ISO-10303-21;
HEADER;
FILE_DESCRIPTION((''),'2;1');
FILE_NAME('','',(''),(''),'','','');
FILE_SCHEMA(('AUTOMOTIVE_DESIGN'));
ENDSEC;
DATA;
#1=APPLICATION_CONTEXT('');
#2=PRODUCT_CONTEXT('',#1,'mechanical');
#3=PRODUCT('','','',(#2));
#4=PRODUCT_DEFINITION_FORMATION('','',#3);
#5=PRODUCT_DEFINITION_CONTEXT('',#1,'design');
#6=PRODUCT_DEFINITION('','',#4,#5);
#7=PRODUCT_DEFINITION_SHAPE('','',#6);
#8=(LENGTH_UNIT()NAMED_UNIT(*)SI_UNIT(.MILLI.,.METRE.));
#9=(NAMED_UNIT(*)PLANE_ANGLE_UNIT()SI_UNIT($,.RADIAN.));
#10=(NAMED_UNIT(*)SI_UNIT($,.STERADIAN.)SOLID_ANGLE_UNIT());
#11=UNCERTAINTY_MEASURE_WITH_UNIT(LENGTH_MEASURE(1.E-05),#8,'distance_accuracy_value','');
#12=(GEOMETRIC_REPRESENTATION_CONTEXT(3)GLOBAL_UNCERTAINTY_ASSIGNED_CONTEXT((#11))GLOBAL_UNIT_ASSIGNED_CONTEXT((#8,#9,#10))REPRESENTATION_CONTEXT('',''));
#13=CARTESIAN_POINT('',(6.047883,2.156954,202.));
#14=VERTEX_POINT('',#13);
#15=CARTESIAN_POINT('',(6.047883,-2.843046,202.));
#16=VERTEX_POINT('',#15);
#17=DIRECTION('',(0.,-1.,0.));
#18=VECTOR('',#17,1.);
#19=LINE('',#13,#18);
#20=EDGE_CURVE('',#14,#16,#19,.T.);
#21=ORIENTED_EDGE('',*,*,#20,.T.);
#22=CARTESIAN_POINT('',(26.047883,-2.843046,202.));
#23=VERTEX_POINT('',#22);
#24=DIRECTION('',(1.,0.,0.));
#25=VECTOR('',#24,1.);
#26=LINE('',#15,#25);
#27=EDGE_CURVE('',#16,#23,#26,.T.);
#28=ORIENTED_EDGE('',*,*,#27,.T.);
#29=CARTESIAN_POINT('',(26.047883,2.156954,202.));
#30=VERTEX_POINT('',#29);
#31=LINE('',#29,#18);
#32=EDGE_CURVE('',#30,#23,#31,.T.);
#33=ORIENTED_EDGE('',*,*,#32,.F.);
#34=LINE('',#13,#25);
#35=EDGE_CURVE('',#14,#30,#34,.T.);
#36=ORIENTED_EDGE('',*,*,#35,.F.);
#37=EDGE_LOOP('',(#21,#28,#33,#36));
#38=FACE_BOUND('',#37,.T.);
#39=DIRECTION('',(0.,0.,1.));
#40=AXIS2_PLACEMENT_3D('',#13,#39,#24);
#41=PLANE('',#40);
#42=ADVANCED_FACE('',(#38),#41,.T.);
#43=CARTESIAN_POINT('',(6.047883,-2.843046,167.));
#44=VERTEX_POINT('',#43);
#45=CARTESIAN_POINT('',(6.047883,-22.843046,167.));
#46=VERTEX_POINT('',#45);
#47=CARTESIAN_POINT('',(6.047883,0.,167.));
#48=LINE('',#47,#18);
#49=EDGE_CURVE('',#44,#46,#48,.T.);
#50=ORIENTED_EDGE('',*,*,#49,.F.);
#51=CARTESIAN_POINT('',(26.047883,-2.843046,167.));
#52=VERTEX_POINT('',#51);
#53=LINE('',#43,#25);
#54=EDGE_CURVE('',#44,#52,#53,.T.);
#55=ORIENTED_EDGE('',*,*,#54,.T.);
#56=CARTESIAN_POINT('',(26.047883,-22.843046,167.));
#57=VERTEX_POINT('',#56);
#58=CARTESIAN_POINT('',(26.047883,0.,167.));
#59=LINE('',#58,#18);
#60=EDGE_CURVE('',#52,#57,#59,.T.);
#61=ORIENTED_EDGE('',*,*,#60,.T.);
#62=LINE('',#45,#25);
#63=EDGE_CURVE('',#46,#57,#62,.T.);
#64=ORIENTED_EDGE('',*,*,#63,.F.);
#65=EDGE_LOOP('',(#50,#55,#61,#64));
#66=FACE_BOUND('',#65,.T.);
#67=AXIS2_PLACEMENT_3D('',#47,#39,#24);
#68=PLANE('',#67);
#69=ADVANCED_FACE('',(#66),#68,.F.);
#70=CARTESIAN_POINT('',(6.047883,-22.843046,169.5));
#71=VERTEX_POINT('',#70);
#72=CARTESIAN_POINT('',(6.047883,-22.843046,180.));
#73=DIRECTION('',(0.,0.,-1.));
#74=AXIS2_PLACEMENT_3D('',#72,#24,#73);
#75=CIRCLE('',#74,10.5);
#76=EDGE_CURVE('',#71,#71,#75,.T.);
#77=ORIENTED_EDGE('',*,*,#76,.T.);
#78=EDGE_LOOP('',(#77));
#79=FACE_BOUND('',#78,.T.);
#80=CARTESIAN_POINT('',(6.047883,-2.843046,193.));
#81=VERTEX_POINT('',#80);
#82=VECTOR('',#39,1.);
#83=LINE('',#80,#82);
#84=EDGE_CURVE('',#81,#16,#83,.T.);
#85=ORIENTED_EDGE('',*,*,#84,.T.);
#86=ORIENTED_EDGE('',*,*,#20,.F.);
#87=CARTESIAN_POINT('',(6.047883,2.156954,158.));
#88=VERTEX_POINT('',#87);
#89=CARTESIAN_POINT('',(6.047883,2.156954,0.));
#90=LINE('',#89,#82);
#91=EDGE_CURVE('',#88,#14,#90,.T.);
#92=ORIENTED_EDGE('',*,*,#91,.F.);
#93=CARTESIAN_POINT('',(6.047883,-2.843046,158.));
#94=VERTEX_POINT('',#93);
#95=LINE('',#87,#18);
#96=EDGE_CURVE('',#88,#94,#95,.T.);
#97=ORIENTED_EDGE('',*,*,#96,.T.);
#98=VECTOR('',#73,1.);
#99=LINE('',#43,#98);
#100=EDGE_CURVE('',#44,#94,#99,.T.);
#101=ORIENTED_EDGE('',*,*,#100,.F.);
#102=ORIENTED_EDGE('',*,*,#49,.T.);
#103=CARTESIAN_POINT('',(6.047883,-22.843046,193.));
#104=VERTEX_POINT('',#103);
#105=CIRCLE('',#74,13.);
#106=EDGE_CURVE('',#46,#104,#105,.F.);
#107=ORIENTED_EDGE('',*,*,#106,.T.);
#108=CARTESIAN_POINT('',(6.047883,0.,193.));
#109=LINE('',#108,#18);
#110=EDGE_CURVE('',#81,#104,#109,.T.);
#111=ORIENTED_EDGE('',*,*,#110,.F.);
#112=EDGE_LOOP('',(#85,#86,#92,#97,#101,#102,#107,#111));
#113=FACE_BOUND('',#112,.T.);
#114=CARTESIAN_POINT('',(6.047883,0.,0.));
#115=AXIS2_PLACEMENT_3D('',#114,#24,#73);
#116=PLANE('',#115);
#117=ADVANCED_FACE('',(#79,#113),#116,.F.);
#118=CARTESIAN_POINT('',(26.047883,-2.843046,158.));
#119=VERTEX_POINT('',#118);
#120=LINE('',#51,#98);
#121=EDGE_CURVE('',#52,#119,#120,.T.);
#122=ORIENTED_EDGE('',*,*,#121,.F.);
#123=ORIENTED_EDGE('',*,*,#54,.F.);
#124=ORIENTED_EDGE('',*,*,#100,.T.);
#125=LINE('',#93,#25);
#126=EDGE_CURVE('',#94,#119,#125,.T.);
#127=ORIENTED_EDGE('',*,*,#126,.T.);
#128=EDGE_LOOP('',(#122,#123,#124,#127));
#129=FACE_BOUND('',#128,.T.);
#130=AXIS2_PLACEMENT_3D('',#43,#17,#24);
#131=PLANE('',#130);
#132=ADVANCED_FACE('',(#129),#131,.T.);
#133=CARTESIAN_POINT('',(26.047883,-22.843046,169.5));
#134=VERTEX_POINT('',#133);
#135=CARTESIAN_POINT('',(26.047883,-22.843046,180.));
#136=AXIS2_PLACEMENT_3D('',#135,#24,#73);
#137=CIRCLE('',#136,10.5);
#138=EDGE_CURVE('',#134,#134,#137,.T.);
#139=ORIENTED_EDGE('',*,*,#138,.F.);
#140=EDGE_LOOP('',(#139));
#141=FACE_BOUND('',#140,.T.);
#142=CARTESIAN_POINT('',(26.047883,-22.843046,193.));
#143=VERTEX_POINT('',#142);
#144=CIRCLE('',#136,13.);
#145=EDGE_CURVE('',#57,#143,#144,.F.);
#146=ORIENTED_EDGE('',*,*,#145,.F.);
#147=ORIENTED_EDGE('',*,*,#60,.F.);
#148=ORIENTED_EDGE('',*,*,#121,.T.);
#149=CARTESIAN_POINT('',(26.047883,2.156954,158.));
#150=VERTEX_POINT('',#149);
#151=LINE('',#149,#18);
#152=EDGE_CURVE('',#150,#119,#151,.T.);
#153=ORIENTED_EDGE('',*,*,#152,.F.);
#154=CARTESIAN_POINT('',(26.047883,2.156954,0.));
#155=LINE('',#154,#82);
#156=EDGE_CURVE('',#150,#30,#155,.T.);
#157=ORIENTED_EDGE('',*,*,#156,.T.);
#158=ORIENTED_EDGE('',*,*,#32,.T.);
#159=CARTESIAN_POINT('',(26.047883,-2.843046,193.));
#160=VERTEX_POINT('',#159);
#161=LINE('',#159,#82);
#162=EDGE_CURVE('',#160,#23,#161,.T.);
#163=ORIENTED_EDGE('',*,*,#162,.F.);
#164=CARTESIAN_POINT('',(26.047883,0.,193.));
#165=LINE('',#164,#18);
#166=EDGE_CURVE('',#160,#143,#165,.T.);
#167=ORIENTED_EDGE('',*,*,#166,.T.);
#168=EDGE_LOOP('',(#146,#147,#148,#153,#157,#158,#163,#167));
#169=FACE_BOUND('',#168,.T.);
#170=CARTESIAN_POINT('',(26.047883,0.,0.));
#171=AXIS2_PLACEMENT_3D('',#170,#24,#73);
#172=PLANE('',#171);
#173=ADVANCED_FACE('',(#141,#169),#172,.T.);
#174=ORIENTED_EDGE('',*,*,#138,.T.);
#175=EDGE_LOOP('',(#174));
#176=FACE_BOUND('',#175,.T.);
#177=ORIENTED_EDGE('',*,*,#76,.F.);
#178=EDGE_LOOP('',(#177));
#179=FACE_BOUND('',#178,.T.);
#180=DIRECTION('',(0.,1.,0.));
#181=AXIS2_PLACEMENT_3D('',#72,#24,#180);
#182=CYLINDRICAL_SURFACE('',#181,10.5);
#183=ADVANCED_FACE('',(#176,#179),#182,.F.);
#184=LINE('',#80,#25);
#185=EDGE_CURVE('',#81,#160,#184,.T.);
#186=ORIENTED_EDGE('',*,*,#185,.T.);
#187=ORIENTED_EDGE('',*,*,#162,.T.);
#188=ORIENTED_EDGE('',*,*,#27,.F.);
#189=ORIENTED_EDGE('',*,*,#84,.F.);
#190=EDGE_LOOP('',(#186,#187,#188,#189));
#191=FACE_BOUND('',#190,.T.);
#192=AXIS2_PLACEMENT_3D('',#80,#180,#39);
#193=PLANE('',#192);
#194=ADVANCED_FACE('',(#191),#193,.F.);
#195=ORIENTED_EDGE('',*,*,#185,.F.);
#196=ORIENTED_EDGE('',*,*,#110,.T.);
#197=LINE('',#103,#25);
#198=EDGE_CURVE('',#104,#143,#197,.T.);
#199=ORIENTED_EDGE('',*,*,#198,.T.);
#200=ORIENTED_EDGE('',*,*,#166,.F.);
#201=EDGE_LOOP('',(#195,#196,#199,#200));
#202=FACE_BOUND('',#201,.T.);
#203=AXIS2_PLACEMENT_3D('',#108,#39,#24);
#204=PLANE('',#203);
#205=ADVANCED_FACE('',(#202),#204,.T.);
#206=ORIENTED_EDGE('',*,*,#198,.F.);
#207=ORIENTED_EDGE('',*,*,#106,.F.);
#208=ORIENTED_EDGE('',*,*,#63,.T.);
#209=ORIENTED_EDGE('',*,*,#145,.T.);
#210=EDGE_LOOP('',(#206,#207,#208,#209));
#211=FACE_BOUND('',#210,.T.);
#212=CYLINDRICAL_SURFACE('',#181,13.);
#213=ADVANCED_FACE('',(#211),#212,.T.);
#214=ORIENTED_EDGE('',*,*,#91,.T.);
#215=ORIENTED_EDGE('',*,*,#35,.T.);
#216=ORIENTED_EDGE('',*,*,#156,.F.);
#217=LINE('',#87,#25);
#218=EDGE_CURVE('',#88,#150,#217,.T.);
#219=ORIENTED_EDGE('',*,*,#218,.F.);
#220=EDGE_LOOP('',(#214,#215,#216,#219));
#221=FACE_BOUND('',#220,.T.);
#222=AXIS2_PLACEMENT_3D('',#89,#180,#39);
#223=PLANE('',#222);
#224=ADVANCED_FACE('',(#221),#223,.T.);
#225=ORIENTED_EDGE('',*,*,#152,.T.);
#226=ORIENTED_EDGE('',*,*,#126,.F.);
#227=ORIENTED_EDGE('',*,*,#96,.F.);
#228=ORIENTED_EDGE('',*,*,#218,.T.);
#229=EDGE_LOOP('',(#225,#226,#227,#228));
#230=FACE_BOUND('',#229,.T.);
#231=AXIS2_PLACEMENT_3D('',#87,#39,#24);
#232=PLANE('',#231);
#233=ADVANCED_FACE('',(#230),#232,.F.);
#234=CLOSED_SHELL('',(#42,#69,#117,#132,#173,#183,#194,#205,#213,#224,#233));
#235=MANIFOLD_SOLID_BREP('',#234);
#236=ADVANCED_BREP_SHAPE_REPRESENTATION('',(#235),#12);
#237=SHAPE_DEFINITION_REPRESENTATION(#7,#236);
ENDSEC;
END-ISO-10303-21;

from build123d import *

# Parameters (mm, degrees)
EXTRUDE_START       = -20
EXTRUDE_1_OUTLINE_R = 10.5
EXTRUDE_1_DEPTH     = 20


# Read off the part's stored shape, not the designer's step: 填料-伸長1
with BuildPart() as part:
    # 填料-伸長1 outline → 填料-伸長1 (new body)
    with BuildSketch(Plane(origin=(26.04788271, 0, 0), x_dir=(0, 0, -1), z_dir=(1, 0, 0)).offset(EXTRUDE_START)):
        with BuildLine():
            Line((-201.999999965, -2.843045968), (-192.999999965, -2.843045968))
            Line((-192.999999965, -2.843045968), (-192.999999965, -22.843045968))
            ThreePointArc((-192.999999965, -22.843045968), (-179.999999965, -35.843045968), (-166.999999965, -22.843045968))
            Line((-166.999999965, -22.843045968), (-166.999999965, -2.843045968))
            Line((-166.999999965, -2.843045968), (-157.999999965, -2.843045968))
            Line((-157.999999965, -2.843045968), (-157.999999965, 2.156954032))
            Line((-157.999999965, 2.156954032), (-201.999999965, 2.156954032))
            Line((-201.999999965, 2.156954032), (-201.999999965, -2.843045968))
        make_face()
        with Locations((-179.999999965, -22.843045968)):
            Circle(EXTRUDE_1_OUTLINE_R, mode=Mode.SUBTRACT)
    extrude(amount=EXTRUDE_1_DEPTH)


solid = part.part
